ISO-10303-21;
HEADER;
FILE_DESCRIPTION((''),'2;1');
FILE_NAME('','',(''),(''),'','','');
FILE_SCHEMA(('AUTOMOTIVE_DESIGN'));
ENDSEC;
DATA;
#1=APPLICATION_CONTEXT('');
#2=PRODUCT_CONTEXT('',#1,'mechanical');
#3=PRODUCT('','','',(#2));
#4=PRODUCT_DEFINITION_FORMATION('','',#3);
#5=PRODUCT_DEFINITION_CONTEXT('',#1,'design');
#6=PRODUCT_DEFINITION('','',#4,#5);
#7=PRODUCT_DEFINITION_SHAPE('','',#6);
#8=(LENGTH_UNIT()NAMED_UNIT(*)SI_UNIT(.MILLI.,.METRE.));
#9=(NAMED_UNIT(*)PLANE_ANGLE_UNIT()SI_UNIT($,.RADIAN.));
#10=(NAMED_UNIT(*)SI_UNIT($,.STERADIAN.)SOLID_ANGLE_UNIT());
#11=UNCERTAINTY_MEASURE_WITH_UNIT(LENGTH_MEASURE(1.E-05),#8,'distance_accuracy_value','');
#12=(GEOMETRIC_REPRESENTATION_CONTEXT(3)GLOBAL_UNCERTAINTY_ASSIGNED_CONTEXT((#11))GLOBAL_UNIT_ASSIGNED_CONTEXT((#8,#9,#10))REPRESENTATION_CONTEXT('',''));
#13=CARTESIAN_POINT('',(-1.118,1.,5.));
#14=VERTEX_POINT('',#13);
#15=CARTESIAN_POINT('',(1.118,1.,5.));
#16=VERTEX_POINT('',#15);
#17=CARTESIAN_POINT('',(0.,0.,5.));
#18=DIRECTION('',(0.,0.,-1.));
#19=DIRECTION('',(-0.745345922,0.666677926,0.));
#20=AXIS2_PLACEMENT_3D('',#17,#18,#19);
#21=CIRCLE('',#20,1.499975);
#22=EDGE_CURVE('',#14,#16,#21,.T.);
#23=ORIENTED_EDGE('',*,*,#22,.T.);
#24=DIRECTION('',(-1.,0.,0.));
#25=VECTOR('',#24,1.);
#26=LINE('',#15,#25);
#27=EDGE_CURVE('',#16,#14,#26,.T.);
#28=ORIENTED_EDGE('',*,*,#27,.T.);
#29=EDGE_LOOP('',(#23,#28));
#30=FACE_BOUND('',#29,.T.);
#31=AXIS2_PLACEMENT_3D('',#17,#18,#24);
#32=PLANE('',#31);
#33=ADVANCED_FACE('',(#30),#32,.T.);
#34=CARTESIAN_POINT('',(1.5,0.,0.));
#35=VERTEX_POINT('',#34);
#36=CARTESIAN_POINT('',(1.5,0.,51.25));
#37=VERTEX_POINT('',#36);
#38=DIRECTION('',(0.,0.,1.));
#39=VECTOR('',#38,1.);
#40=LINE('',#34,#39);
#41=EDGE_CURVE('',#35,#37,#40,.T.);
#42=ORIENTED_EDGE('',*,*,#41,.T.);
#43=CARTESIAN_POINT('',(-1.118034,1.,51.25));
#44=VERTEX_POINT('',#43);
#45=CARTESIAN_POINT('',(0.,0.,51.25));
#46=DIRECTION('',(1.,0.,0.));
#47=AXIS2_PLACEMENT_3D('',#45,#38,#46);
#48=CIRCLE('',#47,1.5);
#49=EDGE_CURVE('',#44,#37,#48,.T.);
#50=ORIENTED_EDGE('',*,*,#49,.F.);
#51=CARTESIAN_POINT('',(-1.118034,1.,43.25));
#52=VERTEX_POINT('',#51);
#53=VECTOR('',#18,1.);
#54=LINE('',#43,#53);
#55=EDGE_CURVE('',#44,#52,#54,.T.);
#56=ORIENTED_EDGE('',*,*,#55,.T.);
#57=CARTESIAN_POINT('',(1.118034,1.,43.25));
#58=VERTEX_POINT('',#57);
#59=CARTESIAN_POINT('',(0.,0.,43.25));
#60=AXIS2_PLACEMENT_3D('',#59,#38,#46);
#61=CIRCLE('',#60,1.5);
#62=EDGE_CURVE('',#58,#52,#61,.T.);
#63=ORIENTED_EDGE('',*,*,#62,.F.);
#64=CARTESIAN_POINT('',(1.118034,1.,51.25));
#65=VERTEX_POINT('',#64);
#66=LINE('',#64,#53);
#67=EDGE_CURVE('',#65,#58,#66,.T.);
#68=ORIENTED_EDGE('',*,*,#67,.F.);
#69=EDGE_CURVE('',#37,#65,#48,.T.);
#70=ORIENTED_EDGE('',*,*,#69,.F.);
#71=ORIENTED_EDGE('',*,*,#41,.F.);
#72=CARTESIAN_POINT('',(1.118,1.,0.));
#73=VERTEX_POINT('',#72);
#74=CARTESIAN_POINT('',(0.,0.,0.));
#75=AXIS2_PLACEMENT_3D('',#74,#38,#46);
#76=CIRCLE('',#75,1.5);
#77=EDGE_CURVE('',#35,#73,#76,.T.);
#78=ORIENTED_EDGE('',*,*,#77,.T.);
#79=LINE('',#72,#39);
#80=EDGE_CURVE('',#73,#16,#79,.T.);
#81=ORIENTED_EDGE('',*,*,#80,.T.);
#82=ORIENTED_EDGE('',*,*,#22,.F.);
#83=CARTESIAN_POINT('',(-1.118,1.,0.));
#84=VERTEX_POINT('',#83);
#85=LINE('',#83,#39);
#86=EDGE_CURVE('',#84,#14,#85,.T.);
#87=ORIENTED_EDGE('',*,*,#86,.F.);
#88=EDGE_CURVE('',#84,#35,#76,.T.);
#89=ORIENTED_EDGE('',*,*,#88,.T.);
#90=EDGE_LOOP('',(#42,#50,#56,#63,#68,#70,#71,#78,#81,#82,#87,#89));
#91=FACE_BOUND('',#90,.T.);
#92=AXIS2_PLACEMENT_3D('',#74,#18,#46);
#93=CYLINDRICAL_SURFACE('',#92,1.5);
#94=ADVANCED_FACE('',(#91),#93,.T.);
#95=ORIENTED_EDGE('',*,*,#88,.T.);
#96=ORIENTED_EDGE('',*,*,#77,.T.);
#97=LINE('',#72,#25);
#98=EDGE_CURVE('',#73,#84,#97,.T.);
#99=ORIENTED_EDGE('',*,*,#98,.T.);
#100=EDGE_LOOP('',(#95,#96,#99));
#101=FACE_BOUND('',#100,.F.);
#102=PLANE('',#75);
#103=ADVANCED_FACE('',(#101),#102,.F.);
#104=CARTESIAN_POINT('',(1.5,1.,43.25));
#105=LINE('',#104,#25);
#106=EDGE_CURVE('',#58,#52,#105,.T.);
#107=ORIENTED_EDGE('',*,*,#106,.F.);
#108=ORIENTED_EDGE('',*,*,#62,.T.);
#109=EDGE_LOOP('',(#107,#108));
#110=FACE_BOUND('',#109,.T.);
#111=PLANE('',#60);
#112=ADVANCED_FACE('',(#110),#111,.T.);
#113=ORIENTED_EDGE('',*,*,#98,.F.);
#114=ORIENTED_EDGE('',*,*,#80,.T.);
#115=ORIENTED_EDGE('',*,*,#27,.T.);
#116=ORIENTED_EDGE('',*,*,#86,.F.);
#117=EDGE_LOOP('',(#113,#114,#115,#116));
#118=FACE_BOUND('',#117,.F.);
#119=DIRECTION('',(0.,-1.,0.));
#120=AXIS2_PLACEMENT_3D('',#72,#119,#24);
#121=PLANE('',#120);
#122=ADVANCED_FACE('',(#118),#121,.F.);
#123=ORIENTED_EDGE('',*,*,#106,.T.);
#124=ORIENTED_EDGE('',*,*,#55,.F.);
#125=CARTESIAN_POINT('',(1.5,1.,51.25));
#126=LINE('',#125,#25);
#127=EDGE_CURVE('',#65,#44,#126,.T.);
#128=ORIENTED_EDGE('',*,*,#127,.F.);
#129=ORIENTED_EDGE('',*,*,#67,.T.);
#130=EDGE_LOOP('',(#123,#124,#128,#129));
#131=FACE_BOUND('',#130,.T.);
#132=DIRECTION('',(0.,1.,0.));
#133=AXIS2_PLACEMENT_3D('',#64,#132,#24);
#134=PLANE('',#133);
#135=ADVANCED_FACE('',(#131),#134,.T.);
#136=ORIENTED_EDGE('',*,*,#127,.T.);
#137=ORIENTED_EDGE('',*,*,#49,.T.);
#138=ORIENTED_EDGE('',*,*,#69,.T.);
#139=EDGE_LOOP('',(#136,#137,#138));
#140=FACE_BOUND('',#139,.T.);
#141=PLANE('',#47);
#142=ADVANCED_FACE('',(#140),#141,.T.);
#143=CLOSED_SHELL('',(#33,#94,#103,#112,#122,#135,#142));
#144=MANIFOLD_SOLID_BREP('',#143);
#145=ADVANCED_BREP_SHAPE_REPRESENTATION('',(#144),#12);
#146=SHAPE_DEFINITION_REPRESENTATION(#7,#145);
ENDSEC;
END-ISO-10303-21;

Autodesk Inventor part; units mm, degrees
ref_plane "YZ Plane" through (0, 0, 0) normal (1, 0, 0) x (0, 1, 0)
ref_plane "XZ Plane" through (0, 0, 0) normal (0, 1, 0) x (-1, 0, 0)
ref_plane "XY Plane" through (0, 0, 0) normal (0, 0, 1) x (1, 0, 0)
sketch "Эскиз1" plane through (0, 0, 0) normal (0, 0, 1) x (1, 0, 0)
  circle A0 centre (0, 0) radius 1.5
  dimension "d0" = 3
extrude "Выдавливание1" add sketch "Эскиз1" along normal blind 51.25
sketch "Эскиз2" plane through (0, 0, 51.25) normal (0, 0, 1) x (1, 0, 0)
  line L0 (-1.5, -1) -> (1.5, -1)
  line L1 (1.5, -1) -> (1.5, 1)
  line L2 (1.5, 1) -> (-1.5, 1)
  line L3 (-1.5, 1) -> (-1.5, -1)
  line L4 (-1.5, -1) -> (1.5, 1) construction
  line L5 (1.5, -1) -> (-1.5, 1) construction
  circle A0 centre (0, 0) radius 1.5
  point P0 (-1.118, 1)
  point P1 (1.118, 1)
  dimension "d3" = 2
extrude "Выдавливание2" cut sketch "Эскиз2" against normal blind 8 contours A0 L2
sketch "Эскиз3" plane through (0, 0, 0) normal (0, 0, -1) x (-1, 0, 0)
  arc A0 (1.118, 1) -> (-1.118, 1) centre (0, 0) ccw projected
  line L0 (-1.118, 1) -> (1.118, 1) projected
extrude "Выдавливание3" cut sketch "Эскиз3" against normal blind 5
equation "\"Радиус_гибки\" = Толщина"
equation "\"Ширина_просечки\" = Толщина"
equation "\"Глубина_просечки\" = 0.5 * Толщина"
equation "\"Размер_просечки\" = 4 * Толщина"
equation "\"Мин_остаток\" = 2 * Толщина"
equation "\"Радиус_перехода\" = Радиус_гибки"
equation "\"Радиус_Якоби\" = Толщина"
equation "\"Размер_зазора\" = Толщина"
equation "\"Толщина\" = 0.5"
properties part number "Ось 3мм задняя"
